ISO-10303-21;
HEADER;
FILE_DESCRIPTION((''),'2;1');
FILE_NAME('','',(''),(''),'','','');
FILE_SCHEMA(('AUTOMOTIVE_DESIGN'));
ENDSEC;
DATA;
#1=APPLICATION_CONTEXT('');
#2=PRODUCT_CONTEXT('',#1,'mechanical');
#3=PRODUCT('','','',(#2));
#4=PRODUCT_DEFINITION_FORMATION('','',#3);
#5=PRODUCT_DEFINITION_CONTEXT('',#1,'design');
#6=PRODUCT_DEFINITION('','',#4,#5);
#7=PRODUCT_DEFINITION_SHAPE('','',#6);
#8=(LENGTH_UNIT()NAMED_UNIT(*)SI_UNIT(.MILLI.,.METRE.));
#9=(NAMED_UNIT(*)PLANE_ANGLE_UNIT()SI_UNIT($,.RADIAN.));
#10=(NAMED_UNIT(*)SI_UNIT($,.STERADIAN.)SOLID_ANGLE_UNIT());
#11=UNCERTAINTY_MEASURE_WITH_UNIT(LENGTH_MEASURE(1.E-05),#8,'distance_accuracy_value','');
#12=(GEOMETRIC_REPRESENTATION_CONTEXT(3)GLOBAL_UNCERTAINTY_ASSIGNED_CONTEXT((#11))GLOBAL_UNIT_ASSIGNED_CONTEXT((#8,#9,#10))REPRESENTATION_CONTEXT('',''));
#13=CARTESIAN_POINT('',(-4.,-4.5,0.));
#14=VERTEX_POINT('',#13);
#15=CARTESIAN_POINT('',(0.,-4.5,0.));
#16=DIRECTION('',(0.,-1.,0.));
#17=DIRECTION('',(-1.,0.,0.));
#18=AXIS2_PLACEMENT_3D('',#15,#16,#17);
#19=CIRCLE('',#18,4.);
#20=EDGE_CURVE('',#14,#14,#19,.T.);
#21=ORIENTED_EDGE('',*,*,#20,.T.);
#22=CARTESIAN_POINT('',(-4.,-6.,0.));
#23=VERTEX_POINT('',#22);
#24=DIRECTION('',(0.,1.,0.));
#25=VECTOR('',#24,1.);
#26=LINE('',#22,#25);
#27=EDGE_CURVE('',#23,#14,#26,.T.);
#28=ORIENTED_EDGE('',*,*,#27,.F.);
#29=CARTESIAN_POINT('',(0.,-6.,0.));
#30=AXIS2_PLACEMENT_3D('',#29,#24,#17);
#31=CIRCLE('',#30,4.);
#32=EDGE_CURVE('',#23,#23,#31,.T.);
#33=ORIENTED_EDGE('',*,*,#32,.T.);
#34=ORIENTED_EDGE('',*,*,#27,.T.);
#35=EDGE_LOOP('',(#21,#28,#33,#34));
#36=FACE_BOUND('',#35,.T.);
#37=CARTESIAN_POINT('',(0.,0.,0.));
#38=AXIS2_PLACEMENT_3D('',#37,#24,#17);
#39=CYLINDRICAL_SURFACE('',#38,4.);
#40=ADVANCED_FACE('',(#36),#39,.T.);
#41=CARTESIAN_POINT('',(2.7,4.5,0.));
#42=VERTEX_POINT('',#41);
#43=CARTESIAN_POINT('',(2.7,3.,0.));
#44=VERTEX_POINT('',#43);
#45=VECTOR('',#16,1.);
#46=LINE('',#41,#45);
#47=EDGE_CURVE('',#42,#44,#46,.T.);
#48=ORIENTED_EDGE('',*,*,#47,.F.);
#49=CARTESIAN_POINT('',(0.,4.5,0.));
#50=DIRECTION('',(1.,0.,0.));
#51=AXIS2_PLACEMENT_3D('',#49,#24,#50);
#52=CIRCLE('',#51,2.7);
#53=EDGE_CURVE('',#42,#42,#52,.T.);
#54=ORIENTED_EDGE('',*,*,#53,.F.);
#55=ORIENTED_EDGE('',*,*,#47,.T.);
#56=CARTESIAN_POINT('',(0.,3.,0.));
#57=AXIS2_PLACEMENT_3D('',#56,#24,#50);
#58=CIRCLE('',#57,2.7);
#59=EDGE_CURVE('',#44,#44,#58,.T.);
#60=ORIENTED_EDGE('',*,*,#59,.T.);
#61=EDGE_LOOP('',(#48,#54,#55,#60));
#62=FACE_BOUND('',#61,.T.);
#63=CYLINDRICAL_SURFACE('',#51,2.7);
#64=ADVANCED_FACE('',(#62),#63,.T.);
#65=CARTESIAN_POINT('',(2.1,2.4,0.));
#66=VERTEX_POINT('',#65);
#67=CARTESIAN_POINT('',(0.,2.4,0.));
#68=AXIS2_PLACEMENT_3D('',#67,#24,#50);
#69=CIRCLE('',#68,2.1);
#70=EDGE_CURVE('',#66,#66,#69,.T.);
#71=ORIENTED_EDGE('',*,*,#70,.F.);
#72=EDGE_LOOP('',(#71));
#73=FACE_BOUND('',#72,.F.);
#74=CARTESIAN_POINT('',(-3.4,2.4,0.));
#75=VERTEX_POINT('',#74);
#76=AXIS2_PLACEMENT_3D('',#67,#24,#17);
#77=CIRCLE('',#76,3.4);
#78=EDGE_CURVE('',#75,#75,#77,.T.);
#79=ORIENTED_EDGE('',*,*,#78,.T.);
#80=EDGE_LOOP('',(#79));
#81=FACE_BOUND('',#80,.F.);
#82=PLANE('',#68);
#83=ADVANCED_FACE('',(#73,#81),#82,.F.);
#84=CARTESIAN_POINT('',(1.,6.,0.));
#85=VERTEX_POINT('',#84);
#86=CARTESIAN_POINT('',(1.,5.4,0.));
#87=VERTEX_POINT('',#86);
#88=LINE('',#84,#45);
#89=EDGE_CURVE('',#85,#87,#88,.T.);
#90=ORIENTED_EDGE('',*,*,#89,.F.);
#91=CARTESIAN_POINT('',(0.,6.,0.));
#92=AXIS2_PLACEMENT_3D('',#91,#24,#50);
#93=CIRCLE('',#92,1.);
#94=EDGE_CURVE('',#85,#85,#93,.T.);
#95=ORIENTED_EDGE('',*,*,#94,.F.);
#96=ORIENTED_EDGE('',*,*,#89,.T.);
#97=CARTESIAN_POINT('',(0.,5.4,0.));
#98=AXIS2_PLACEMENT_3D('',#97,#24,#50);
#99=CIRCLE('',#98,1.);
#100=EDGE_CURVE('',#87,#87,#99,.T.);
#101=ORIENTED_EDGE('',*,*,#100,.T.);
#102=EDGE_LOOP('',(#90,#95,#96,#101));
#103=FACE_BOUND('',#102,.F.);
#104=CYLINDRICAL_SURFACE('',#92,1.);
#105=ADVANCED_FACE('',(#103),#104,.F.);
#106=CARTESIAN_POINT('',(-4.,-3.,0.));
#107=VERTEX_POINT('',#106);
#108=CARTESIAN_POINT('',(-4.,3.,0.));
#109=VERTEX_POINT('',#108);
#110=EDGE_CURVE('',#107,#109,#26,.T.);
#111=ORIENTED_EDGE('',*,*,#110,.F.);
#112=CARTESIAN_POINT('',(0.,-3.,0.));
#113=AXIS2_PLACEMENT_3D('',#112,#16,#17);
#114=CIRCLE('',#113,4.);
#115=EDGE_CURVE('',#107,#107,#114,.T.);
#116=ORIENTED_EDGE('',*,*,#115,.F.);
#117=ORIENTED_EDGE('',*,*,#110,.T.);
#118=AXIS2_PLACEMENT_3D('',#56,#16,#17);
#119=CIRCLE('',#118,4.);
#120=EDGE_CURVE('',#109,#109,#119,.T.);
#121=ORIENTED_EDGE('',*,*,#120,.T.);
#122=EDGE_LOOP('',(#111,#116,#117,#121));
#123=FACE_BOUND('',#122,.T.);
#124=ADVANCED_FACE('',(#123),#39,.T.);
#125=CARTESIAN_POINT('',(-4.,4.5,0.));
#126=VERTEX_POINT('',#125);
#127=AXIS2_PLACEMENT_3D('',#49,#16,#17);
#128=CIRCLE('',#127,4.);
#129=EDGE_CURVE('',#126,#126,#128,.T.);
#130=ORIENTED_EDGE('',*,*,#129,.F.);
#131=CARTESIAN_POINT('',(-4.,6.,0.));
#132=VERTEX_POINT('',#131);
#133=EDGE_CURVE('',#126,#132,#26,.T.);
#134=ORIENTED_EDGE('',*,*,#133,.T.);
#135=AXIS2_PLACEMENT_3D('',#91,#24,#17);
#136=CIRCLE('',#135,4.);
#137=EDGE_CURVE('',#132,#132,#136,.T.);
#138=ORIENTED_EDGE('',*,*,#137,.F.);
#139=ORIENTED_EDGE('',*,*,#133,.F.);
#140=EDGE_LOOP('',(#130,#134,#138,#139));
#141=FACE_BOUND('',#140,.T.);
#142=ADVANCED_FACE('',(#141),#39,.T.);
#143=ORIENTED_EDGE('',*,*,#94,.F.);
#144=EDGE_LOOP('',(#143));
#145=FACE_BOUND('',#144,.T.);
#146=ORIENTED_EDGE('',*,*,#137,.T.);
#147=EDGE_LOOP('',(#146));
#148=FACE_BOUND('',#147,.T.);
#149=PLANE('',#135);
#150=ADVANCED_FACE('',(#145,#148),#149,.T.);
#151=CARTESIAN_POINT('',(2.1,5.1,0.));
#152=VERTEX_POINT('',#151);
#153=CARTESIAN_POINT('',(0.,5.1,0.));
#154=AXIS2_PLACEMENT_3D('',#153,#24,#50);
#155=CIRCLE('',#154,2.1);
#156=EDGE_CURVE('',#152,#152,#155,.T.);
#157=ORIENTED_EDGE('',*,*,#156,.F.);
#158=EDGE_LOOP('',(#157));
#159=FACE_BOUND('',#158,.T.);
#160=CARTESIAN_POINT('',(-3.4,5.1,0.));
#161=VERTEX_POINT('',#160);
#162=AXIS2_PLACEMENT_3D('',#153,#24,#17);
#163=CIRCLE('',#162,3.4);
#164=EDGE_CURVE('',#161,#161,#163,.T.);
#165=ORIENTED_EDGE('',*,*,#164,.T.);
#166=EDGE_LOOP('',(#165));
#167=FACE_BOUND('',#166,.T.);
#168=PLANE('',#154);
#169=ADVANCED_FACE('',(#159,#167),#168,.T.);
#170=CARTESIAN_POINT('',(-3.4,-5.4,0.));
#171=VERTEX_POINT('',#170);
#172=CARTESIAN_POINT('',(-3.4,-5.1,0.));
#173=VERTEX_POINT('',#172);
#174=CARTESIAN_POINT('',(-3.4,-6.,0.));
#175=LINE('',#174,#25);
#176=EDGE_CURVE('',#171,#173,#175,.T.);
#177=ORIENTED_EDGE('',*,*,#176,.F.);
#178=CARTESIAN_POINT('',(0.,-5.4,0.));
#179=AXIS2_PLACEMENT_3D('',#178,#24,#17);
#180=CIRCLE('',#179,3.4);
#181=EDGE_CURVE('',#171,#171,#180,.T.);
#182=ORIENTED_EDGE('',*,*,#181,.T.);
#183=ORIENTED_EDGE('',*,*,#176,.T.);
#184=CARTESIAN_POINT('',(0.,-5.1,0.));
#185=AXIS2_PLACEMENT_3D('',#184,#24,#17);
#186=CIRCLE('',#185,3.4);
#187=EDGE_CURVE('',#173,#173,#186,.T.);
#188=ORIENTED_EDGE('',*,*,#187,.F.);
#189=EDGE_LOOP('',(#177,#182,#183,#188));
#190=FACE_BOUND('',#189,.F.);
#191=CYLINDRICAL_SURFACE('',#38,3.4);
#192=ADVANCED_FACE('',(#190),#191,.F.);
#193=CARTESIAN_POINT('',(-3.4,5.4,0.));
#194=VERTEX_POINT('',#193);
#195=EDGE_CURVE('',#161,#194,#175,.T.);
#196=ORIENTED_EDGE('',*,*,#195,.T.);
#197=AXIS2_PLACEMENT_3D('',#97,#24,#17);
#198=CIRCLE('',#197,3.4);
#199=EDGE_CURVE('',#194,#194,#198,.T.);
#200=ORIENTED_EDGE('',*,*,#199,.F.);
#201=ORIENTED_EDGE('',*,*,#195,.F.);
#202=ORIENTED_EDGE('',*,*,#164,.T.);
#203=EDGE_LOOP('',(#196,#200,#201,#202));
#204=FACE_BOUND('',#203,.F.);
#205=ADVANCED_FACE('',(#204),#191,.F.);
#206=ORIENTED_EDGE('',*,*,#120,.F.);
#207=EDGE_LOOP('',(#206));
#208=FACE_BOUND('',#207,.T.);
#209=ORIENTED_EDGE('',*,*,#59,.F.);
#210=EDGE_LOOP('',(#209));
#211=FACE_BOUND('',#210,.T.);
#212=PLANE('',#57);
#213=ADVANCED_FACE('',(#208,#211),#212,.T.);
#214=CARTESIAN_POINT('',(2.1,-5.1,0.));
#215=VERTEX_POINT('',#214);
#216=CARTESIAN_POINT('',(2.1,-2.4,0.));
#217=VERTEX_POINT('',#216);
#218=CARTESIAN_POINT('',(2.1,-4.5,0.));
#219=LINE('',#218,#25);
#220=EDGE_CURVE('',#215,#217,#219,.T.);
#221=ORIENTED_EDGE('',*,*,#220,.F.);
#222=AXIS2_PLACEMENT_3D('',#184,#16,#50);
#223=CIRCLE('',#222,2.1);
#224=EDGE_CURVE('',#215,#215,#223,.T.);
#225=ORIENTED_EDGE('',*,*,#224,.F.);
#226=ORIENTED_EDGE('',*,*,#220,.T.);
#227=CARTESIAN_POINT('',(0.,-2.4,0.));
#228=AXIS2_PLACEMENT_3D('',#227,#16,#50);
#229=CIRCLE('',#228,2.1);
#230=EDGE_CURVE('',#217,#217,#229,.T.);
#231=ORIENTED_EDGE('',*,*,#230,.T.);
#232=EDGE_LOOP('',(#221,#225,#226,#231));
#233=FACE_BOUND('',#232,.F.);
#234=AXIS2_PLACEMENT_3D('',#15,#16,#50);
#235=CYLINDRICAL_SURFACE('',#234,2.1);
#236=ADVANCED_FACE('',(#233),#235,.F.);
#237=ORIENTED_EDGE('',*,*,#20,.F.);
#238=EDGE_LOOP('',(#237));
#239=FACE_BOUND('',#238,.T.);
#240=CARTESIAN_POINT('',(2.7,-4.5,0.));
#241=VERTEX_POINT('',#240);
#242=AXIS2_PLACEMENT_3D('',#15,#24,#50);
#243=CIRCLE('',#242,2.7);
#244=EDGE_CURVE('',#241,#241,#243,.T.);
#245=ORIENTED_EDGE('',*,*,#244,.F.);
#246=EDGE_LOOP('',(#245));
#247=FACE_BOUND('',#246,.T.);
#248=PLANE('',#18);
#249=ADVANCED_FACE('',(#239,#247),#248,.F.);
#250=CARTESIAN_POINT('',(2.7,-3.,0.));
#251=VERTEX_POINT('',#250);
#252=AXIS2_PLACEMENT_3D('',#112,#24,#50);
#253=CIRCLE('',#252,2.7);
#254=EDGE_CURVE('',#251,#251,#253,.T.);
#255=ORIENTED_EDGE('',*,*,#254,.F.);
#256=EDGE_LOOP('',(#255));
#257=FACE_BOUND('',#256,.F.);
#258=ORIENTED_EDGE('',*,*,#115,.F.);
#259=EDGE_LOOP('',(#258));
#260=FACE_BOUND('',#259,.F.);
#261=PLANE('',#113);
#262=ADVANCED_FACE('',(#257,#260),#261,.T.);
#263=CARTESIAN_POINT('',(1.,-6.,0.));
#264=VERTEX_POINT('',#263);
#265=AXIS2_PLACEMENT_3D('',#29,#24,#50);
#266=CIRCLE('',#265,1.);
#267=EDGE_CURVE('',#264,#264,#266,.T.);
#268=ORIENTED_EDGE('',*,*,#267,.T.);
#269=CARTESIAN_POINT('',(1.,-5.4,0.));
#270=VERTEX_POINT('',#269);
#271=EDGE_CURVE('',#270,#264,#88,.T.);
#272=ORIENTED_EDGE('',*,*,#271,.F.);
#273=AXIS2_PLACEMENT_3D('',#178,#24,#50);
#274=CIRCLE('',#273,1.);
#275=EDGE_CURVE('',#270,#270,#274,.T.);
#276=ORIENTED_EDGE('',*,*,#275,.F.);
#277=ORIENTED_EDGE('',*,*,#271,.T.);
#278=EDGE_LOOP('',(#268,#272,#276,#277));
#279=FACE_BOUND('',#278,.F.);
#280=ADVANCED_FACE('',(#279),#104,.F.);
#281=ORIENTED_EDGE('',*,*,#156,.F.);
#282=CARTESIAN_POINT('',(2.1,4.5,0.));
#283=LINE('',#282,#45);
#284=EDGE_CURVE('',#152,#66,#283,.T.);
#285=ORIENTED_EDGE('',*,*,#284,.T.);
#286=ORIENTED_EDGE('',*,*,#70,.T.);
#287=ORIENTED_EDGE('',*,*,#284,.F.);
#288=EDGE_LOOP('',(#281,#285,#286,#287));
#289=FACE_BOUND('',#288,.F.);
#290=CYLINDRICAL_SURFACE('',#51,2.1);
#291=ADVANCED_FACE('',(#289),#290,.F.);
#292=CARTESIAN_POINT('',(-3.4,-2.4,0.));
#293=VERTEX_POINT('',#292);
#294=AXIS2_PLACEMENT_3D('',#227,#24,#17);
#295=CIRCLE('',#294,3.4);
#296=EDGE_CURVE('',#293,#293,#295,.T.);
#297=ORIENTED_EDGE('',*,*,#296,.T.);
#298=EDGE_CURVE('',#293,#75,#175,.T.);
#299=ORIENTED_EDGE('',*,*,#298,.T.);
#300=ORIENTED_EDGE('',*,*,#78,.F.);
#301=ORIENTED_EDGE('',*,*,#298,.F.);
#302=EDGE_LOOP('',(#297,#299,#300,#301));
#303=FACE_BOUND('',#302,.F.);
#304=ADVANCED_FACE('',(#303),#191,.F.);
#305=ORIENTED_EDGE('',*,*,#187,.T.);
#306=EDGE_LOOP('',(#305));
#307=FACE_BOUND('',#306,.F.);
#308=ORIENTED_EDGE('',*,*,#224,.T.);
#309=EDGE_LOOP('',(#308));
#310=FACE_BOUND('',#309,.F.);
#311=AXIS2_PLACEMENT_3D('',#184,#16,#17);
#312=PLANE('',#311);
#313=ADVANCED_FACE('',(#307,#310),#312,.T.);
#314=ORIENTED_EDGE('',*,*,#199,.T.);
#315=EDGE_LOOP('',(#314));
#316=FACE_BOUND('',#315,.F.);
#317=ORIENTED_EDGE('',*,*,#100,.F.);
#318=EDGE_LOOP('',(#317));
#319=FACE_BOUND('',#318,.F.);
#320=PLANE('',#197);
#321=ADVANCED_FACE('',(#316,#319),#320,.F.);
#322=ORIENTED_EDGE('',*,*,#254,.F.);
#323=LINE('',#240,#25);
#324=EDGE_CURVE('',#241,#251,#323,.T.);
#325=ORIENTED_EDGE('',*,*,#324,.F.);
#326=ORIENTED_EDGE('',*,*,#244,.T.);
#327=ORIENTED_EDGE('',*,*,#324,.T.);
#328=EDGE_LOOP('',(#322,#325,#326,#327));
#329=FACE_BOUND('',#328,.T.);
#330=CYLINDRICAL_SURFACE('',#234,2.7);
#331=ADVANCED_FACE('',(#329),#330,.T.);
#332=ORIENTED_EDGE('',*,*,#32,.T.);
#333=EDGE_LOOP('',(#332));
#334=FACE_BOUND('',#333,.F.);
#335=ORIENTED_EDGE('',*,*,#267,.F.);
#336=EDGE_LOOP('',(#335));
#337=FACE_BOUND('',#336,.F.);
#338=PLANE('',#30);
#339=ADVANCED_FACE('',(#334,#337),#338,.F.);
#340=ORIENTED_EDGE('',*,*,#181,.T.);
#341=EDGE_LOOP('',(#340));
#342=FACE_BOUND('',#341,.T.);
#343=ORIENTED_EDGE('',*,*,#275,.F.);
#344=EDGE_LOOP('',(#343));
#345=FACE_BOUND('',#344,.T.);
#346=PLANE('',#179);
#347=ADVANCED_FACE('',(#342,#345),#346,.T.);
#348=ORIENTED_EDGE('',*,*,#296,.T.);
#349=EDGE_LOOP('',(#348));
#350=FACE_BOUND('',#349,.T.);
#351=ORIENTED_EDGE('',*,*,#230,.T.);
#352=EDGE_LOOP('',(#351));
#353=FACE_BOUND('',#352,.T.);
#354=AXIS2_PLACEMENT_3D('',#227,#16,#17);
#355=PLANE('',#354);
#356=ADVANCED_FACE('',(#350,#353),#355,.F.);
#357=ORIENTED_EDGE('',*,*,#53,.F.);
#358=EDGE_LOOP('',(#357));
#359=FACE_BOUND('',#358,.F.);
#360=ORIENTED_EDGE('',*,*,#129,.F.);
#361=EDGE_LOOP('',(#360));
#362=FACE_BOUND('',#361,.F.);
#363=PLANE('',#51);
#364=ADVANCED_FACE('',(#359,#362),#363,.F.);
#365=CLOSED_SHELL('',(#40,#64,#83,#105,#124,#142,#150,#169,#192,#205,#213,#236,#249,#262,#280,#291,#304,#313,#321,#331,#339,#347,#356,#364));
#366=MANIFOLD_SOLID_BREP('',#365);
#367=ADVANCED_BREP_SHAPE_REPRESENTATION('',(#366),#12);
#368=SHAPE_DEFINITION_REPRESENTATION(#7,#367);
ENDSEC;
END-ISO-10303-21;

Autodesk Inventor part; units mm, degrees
ref_plane "YZ Plane" through (0, 0, 0) normal (1, 0, 0) x (0, 1, 0)
ref_plane "XZ Plane" through (0, 0, 0) normal (0, 1, 0) x (-1, 0, 0)
sketch "Boceto1" plane through (0, 0, 0) normal (0, 1, 0) x (-1, 0, 0)
  circle A0 centre (0, 0) radius 4
  circle A1 centre (0, 0) radius 1
  dimension "d0" = 8
  dimension "d7" = 2
extrude "Extrusión1" add sketch "Boceto1" along normal mid plane 12 contours A0 | A1
ref_plane "Plano de trabajo1" through (0, 4.5, 0) normal (0, 1, 0) x (1, 0, 0)
sketch "Boceto2" plane through (0, 4.5, 0) normal (0, 1, 0) x (1, 0, 0)
  circle A0 centre (0, 0) radius 4 projected
  circle A1 centre (0, 0) radius 2.7
  dimension "d4" = 5.4
extrude "Extrusión2" cut sketch "Boceto2" against normal blind 1.5
mirror "Simetría1" about plane through (0, 0, 0) normal (0, 1, 0) of "Extrusión2"
shell "Vaciado2" thickness 0.6 removed faces 0
sketch "Boceto4" plane through (0, 6, 0) normal (0, 1, 0) x (1, 0, 0)
  circle A0 centre (0, 0) radius 1
  dimension "d14" = 2
extrude "Extrusión4" cut sketch "Boceto4" against normal through all
properties part number "antivibracion_3DPrint"
